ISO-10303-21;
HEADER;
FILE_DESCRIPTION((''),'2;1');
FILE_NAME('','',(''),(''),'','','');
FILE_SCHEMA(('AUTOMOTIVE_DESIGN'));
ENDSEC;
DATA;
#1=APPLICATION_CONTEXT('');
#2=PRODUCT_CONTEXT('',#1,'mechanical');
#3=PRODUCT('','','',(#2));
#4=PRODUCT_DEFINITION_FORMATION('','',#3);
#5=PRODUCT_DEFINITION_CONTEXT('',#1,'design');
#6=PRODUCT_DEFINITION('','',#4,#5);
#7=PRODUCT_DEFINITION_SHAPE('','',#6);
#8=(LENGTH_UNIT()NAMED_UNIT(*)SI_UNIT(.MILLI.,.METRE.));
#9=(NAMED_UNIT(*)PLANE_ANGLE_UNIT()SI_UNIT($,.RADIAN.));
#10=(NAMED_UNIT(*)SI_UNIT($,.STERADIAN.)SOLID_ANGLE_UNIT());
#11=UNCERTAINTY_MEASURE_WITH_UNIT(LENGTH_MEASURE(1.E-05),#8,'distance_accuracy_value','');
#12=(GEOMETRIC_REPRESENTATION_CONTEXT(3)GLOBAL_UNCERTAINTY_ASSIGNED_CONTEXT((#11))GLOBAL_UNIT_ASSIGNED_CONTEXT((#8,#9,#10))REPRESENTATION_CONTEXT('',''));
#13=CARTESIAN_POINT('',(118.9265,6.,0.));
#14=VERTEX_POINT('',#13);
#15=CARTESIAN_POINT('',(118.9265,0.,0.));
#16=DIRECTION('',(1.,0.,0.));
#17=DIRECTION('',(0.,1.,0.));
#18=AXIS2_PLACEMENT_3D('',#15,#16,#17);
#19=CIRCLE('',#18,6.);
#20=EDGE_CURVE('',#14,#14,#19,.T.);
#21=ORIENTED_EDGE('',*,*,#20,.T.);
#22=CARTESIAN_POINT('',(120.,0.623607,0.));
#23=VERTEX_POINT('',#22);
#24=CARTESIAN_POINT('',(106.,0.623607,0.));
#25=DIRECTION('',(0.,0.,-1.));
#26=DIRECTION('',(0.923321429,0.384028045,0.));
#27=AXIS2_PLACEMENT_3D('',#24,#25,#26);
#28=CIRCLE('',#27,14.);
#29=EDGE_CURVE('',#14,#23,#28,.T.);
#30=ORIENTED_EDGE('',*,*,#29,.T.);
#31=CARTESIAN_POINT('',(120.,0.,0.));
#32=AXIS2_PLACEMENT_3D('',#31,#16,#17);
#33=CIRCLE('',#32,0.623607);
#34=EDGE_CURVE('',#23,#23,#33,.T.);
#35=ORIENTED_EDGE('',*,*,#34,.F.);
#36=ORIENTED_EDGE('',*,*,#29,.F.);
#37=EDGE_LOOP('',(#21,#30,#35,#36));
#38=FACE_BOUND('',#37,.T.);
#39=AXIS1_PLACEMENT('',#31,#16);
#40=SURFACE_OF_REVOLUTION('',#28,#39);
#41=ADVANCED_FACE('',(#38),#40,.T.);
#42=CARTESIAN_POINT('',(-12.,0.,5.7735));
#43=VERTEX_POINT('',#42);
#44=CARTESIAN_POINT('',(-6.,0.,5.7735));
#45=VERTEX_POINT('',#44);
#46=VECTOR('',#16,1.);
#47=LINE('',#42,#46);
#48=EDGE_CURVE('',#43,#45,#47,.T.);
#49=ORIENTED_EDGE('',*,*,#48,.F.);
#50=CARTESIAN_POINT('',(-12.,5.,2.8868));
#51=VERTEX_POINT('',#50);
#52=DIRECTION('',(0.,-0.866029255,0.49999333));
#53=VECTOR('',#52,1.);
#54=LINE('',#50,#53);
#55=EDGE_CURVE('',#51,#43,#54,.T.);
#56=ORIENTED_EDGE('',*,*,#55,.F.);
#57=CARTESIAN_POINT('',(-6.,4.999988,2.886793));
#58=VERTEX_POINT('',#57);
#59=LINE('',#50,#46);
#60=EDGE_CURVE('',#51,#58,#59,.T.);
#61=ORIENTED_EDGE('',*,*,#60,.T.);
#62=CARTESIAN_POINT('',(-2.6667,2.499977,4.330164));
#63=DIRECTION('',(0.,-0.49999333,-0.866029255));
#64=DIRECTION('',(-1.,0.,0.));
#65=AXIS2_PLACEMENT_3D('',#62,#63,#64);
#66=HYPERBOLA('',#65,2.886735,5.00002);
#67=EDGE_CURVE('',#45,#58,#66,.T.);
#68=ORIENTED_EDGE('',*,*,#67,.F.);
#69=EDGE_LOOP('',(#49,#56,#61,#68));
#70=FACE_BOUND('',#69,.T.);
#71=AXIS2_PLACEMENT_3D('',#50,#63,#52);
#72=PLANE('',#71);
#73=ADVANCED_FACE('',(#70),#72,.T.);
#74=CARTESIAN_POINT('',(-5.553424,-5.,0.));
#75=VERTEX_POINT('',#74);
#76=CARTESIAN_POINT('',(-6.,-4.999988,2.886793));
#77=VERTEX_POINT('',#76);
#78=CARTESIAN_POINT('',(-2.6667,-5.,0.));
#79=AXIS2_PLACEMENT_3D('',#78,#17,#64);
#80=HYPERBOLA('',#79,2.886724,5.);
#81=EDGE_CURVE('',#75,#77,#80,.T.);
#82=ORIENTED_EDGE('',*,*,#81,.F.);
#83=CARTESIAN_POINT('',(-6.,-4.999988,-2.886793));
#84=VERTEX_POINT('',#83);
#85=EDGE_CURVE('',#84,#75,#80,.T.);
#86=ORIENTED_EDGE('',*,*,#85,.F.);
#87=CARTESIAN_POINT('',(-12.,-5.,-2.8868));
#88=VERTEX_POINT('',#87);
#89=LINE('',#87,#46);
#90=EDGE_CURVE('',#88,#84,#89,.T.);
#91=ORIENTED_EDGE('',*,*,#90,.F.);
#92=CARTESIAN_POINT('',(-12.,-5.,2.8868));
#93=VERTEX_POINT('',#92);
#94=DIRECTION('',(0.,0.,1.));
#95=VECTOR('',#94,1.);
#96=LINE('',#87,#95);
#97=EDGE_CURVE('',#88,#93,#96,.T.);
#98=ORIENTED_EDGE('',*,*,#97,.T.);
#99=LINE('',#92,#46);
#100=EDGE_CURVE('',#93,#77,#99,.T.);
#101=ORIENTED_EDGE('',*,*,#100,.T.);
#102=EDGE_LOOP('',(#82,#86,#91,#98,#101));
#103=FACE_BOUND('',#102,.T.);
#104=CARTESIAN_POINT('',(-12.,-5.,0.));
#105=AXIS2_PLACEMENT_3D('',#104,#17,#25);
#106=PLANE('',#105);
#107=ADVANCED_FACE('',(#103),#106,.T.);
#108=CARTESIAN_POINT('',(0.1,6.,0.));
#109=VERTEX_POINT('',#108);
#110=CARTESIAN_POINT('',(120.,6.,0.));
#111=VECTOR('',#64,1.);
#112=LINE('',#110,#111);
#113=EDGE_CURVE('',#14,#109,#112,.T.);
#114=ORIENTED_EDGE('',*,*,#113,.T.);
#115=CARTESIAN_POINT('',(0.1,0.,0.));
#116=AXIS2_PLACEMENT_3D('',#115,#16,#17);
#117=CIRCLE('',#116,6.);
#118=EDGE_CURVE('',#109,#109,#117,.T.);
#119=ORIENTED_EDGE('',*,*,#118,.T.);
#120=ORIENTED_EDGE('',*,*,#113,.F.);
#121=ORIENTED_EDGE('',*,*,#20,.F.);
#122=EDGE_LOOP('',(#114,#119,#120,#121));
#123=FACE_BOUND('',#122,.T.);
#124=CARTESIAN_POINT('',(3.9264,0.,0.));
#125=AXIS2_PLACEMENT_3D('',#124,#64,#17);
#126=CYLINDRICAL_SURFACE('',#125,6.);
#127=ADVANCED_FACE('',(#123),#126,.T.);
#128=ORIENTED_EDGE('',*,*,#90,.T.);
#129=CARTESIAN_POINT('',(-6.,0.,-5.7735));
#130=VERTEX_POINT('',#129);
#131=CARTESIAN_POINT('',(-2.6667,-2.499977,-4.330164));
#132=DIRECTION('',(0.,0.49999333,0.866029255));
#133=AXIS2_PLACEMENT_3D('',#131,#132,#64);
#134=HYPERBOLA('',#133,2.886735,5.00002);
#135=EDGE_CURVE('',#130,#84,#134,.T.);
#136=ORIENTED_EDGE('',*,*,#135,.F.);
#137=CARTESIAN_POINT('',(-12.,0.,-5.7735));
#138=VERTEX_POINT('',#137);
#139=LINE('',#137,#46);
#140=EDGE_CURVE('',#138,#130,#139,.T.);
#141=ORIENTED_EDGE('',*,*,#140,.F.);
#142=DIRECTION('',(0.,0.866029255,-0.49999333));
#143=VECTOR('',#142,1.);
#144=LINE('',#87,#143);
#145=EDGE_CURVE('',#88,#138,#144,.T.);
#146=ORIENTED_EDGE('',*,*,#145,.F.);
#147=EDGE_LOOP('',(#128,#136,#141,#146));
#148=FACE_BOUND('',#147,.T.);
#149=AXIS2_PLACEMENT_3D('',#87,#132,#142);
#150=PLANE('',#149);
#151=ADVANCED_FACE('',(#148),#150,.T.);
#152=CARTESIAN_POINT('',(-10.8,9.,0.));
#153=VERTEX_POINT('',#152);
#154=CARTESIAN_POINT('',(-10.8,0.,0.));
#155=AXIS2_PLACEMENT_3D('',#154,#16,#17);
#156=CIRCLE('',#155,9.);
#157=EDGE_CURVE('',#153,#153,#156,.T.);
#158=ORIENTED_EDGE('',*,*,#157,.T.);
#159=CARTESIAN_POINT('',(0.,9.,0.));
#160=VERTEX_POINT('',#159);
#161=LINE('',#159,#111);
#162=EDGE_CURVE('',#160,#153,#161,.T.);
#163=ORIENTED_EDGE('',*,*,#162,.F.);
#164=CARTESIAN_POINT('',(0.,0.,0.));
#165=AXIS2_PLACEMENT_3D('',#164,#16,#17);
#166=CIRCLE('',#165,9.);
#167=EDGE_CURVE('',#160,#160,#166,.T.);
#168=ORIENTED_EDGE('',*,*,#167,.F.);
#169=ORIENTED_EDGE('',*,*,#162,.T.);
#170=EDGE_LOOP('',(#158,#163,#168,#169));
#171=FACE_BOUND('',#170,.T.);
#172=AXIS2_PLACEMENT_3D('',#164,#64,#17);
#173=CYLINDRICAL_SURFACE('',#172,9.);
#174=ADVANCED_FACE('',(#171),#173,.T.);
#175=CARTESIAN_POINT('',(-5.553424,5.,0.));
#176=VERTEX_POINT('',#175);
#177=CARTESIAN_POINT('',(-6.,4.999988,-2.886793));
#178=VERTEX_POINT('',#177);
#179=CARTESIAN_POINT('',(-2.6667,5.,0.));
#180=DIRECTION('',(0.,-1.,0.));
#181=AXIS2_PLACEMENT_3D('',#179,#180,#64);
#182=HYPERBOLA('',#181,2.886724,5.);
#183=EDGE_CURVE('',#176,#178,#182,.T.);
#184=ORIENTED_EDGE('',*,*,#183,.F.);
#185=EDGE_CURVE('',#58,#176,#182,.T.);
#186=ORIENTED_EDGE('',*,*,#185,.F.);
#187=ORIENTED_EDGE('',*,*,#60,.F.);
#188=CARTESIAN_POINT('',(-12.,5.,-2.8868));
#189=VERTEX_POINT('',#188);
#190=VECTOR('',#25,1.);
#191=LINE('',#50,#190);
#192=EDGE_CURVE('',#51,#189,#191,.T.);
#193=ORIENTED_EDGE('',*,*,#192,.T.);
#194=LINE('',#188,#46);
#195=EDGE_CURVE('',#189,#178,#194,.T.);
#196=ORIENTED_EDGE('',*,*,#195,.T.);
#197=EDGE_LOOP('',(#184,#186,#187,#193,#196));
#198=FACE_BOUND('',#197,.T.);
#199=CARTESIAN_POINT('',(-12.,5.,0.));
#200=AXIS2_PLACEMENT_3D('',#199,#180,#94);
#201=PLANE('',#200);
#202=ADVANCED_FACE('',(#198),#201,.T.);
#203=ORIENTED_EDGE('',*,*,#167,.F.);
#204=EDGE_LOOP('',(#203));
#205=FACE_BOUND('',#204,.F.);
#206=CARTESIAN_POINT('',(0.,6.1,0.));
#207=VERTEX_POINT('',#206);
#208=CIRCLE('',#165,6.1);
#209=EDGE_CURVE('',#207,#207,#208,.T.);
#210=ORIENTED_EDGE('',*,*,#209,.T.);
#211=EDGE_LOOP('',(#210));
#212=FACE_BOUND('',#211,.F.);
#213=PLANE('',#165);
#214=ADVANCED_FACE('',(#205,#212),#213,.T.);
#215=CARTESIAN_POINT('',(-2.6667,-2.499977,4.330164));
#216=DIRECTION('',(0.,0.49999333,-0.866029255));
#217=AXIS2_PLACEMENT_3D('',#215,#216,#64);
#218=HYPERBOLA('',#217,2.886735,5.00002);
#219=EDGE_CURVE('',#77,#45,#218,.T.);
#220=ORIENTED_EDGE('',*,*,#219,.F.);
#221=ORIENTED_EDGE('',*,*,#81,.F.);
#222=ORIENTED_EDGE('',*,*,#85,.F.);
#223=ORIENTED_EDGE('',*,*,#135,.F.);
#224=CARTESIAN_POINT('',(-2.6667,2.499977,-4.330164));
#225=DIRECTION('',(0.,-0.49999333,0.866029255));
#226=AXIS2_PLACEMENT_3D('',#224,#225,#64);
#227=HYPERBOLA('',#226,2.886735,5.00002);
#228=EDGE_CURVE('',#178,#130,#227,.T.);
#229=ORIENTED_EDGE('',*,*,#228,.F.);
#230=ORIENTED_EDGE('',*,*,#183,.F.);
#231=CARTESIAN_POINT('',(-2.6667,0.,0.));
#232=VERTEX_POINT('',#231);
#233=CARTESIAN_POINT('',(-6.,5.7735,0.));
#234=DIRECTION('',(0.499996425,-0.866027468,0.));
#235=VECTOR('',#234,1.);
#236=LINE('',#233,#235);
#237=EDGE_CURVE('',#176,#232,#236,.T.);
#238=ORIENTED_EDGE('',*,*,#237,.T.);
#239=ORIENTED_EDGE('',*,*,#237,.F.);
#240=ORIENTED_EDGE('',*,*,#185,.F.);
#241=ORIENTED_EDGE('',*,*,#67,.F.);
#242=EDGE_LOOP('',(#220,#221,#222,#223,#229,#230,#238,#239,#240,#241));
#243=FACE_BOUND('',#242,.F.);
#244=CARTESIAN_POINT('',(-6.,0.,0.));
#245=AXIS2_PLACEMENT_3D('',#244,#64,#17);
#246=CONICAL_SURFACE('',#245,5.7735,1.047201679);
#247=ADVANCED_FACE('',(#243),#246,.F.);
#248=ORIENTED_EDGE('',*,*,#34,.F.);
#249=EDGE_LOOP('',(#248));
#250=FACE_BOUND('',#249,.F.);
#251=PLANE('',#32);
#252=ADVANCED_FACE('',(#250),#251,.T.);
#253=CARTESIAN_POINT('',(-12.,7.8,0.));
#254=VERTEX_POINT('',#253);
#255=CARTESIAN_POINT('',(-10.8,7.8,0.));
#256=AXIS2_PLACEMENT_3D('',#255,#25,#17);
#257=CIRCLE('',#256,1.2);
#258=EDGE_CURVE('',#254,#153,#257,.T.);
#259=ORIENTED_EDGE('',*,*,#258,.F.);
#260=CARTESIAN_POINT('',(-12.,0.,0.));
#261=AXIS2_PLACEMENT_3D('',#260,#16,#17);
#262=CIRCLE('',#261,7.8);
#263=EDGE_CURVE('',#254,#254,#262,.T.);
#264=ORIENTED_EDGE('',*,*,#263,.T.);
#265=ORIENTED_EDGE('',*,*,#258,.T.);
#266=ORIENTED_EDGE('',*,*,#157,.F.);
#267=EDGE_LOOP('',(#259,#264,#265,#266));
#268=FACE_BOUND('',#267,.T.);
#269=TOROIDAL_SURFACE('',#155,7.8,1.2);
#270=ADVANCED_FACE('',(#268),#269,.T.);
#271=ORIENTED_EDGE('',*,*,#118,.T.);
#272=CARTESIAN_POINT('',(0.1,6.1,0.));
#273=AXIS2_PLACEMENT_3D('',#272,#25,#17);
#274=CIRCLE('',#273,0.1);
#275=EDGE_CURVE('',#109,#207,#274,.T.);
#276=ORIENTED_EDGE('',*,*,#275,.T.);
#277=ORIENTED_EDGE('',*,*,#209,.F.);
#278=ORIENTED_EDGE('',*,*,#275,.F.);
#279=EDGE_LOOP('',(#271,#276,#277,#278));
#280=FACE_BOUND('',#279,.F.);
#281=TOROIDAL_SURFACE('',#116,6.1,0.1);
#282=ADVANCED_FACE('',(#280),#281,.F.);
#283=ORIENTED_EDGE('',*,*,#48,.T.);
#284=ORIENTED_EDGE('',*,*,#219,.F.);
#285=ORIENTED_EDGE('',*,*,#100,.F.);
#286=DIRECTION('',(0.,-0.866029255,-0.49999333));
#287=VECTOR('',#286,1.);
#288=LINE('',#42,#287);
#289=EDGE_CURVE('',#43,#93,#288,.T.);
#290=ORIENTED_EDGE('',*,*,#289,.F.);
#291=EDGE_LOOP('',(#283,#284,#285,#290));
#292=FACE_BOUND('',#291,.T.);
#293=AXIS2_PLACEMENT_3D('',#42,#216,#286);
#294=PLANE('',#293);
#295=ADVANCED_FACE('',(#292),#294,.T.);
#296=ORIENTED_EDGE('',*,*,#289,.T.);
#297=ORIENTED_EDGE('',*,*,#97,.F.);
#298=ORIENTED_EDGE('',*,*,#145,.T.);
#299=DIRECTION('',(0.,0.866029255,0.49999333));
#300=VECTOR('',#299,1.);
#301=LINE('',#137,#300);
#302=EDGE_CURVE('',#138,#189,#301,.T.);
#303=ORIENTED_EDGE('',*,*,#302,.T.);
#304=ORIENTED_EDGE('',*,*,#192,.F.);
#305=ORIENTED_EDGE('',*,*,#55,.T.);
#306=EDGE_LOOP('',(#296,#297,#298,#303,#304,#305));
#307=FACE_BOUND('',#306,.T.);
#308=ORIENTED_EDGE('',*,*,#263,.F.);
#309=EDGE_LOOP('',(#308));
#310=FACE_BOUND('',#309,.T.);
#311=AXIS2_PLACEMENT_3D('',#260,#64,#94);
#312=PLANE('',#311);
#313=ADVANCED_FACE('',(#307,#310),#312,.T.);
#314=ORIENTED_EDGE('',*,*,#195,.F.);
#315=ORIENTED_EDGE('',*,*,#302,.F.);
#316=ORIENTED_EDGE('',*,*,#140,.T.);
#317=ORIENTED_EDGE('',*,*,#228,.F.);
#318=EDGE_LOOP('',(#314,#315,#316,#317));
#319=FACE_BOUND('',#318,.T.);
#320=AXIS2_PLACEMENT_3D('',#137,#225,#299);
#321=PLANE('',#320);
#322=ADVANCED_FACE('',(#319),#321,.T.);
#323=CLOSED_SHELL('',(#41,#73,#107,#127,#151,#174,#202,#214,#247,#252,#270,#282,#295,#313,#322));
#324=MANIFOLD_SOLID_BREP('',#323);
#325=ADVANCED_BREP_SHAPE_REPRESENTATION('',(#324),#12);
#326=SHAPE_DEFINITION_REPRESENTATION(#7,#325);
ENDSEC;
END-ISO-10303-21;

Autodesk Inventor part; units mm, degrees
ref_plane "YZ Plane" through (0, 0, 0) normal (1, 0, 0) x (0, 1, 0)
ref_plane "XZ Plane" through (0, 0, 0) normal (0, 1, 0) x (-1, 0, 0)
sketch "Rascunho1" plane through (0, 0, 0) normal (0, 0, 1) x (1, 0, 0)
  line L0 (-2.6667, 0) -> (120, 0)
  line L1 (120, 0) -> (120, 6)
  line L2 (120, 6) -> (5, 6)
  line L3 (5, 6) -> (3.9264, 6)
  line L4 (3.9264, 6) -> (0, 6)
  line L5 (0, 6) -> (0, 9)
  line L6 (0, 9) -> (-12, 9)
  line L7 (-12, 9) -> (-12, 5.7735)
  line L8 (-12, 5.7735) -> (-6, 5.7735)
  line L9 (-6, 5.7735) -> (-2.6667, 0)
  line L10 (-38.4, 0) -> (146.4, 0) projected
  line L11 (0, -1.8) -> (0, 10.8) projected
  line L12 (5, 6) -> (0, 6) construction
  dimension "d1" = 115
  dimension "d2" = 1.0736
  dimension "d3" = 12
  dimension "d4" = 6
  dimension "d5" = 60
  dimension "d6" = 12
  dimension "d7" = 12
  dimension "d8" = 11.547
  dimension "d9" = 18
  dimension "d26" = 120
revolve "Corpo" add sketch "Rascunho1" angle 360 about axis through (-2.6667, 0, 0) along (1, 0, 0)
sketch "Rascunho2" plane through (-12, 0, 0) normal (-1, 0, 0) x (0, 0, 1)
  circle A0 centre (0, 0) radius 5.7735 projected
  line L0 (0, -12.6) -> (0, 12.6) projected
  line L1 (-12.6, 0) -> (12.6, 0) projected
  line L2 (5.7735, 0) -> (2.8868, -5)
  line L3 (2.8868, -5) -> (-2.8868, -5)
  line L4 (-2.8868, -5) -> (-5.7735, 0)
  line L5 (-5.7735, 0) -> (-2.8868, 5)
  line L6 (-2.8868, 5) -> (2.8868, 5)
  line L7 (2.8868, 5) -> (5.7735, 0)
extrude "Fenda" add sketch "Rascunho2" against normal up to next contours L7 A0 | A0 L2 | L6 L0 A0 | A0 L0 L3 | L0 L6 A0 | A0 L3 L0 | L4 A0 | A0 L5
fillet "Raio de arredondamento1" radius 1.2 1 edges at (-12, -9, 0)
thread "Rosca" size "M12x1.75" class "6g" standard "ANSI Metric M Profile" length 115
chamfer "Chanfrar1" distance 1.0735 distance2 1.0735 1 edges at (120, -6, 0) measured on face at (120, 1.668, 0.0818)
ref_plane "Work Plane1" through (29, 0, 0) normal (0, -1, 0) x (1, 0, 0)
fillet "Fillet2" radius 0.1 1 edges at (0, -6, 0)
fillet "Fillet3" radius 14 1 edges at (120, -4.9265, 0)
equation "\"d1\" = GEL"
equation "\"d3\" = KOH"
equation "\"d4\" = INTI"
equation "\"d6\" = GD"
equation "\"d7\" = BDM"
equation "\"d8\" = 1.1547 * SW"
equation "\"d9\" = KOD"
equation "\"d26\" = NLG"
equation "\"d17\" = RR"
equation "\"d13\" = GEL"
equation "\"d15\" = -0.5 * SPD + 0.5 * GD"
equation "\"d16\" = GUL"
equation "\"d30\" = R"
equation "\"GD\" = NND"
equation "\"NLG\" = 120"
equation "\"GEL\" = 115"
equation "\"KOD\" = 18"
equation "\"KOH\" = 12"
equation "\"INTI\" = 6"
equation "\"GAL\" = 0.61345 * PTC"
equation "\"GUL\" = 0.61345 * PTC"
equation "\"BDM\" = NND"
equation "\"RR\" = 1.2"
equation "\"SPD\" = NND - 1.2269 * PTC"
equation "\"R\" = 0.1"
equation "\"TOA\" = 30deg"
equation "\"GD1\" = THREADDIA - 1.2269 * PTC"
equation "\"THREADDIA\" = 12"
equation "\"FAWI\" = 45deg"
equation "\"ANG\" = 120deg"
equation "\"PTC\" = 1.75"
equation "\"NND\" = 12"
equation "\"E0\" = 1.155 * SW"
equation "\"SW\" = 10"
properties part number "DIN 912 - M12x120" material "Aço Inox AISI 304"
